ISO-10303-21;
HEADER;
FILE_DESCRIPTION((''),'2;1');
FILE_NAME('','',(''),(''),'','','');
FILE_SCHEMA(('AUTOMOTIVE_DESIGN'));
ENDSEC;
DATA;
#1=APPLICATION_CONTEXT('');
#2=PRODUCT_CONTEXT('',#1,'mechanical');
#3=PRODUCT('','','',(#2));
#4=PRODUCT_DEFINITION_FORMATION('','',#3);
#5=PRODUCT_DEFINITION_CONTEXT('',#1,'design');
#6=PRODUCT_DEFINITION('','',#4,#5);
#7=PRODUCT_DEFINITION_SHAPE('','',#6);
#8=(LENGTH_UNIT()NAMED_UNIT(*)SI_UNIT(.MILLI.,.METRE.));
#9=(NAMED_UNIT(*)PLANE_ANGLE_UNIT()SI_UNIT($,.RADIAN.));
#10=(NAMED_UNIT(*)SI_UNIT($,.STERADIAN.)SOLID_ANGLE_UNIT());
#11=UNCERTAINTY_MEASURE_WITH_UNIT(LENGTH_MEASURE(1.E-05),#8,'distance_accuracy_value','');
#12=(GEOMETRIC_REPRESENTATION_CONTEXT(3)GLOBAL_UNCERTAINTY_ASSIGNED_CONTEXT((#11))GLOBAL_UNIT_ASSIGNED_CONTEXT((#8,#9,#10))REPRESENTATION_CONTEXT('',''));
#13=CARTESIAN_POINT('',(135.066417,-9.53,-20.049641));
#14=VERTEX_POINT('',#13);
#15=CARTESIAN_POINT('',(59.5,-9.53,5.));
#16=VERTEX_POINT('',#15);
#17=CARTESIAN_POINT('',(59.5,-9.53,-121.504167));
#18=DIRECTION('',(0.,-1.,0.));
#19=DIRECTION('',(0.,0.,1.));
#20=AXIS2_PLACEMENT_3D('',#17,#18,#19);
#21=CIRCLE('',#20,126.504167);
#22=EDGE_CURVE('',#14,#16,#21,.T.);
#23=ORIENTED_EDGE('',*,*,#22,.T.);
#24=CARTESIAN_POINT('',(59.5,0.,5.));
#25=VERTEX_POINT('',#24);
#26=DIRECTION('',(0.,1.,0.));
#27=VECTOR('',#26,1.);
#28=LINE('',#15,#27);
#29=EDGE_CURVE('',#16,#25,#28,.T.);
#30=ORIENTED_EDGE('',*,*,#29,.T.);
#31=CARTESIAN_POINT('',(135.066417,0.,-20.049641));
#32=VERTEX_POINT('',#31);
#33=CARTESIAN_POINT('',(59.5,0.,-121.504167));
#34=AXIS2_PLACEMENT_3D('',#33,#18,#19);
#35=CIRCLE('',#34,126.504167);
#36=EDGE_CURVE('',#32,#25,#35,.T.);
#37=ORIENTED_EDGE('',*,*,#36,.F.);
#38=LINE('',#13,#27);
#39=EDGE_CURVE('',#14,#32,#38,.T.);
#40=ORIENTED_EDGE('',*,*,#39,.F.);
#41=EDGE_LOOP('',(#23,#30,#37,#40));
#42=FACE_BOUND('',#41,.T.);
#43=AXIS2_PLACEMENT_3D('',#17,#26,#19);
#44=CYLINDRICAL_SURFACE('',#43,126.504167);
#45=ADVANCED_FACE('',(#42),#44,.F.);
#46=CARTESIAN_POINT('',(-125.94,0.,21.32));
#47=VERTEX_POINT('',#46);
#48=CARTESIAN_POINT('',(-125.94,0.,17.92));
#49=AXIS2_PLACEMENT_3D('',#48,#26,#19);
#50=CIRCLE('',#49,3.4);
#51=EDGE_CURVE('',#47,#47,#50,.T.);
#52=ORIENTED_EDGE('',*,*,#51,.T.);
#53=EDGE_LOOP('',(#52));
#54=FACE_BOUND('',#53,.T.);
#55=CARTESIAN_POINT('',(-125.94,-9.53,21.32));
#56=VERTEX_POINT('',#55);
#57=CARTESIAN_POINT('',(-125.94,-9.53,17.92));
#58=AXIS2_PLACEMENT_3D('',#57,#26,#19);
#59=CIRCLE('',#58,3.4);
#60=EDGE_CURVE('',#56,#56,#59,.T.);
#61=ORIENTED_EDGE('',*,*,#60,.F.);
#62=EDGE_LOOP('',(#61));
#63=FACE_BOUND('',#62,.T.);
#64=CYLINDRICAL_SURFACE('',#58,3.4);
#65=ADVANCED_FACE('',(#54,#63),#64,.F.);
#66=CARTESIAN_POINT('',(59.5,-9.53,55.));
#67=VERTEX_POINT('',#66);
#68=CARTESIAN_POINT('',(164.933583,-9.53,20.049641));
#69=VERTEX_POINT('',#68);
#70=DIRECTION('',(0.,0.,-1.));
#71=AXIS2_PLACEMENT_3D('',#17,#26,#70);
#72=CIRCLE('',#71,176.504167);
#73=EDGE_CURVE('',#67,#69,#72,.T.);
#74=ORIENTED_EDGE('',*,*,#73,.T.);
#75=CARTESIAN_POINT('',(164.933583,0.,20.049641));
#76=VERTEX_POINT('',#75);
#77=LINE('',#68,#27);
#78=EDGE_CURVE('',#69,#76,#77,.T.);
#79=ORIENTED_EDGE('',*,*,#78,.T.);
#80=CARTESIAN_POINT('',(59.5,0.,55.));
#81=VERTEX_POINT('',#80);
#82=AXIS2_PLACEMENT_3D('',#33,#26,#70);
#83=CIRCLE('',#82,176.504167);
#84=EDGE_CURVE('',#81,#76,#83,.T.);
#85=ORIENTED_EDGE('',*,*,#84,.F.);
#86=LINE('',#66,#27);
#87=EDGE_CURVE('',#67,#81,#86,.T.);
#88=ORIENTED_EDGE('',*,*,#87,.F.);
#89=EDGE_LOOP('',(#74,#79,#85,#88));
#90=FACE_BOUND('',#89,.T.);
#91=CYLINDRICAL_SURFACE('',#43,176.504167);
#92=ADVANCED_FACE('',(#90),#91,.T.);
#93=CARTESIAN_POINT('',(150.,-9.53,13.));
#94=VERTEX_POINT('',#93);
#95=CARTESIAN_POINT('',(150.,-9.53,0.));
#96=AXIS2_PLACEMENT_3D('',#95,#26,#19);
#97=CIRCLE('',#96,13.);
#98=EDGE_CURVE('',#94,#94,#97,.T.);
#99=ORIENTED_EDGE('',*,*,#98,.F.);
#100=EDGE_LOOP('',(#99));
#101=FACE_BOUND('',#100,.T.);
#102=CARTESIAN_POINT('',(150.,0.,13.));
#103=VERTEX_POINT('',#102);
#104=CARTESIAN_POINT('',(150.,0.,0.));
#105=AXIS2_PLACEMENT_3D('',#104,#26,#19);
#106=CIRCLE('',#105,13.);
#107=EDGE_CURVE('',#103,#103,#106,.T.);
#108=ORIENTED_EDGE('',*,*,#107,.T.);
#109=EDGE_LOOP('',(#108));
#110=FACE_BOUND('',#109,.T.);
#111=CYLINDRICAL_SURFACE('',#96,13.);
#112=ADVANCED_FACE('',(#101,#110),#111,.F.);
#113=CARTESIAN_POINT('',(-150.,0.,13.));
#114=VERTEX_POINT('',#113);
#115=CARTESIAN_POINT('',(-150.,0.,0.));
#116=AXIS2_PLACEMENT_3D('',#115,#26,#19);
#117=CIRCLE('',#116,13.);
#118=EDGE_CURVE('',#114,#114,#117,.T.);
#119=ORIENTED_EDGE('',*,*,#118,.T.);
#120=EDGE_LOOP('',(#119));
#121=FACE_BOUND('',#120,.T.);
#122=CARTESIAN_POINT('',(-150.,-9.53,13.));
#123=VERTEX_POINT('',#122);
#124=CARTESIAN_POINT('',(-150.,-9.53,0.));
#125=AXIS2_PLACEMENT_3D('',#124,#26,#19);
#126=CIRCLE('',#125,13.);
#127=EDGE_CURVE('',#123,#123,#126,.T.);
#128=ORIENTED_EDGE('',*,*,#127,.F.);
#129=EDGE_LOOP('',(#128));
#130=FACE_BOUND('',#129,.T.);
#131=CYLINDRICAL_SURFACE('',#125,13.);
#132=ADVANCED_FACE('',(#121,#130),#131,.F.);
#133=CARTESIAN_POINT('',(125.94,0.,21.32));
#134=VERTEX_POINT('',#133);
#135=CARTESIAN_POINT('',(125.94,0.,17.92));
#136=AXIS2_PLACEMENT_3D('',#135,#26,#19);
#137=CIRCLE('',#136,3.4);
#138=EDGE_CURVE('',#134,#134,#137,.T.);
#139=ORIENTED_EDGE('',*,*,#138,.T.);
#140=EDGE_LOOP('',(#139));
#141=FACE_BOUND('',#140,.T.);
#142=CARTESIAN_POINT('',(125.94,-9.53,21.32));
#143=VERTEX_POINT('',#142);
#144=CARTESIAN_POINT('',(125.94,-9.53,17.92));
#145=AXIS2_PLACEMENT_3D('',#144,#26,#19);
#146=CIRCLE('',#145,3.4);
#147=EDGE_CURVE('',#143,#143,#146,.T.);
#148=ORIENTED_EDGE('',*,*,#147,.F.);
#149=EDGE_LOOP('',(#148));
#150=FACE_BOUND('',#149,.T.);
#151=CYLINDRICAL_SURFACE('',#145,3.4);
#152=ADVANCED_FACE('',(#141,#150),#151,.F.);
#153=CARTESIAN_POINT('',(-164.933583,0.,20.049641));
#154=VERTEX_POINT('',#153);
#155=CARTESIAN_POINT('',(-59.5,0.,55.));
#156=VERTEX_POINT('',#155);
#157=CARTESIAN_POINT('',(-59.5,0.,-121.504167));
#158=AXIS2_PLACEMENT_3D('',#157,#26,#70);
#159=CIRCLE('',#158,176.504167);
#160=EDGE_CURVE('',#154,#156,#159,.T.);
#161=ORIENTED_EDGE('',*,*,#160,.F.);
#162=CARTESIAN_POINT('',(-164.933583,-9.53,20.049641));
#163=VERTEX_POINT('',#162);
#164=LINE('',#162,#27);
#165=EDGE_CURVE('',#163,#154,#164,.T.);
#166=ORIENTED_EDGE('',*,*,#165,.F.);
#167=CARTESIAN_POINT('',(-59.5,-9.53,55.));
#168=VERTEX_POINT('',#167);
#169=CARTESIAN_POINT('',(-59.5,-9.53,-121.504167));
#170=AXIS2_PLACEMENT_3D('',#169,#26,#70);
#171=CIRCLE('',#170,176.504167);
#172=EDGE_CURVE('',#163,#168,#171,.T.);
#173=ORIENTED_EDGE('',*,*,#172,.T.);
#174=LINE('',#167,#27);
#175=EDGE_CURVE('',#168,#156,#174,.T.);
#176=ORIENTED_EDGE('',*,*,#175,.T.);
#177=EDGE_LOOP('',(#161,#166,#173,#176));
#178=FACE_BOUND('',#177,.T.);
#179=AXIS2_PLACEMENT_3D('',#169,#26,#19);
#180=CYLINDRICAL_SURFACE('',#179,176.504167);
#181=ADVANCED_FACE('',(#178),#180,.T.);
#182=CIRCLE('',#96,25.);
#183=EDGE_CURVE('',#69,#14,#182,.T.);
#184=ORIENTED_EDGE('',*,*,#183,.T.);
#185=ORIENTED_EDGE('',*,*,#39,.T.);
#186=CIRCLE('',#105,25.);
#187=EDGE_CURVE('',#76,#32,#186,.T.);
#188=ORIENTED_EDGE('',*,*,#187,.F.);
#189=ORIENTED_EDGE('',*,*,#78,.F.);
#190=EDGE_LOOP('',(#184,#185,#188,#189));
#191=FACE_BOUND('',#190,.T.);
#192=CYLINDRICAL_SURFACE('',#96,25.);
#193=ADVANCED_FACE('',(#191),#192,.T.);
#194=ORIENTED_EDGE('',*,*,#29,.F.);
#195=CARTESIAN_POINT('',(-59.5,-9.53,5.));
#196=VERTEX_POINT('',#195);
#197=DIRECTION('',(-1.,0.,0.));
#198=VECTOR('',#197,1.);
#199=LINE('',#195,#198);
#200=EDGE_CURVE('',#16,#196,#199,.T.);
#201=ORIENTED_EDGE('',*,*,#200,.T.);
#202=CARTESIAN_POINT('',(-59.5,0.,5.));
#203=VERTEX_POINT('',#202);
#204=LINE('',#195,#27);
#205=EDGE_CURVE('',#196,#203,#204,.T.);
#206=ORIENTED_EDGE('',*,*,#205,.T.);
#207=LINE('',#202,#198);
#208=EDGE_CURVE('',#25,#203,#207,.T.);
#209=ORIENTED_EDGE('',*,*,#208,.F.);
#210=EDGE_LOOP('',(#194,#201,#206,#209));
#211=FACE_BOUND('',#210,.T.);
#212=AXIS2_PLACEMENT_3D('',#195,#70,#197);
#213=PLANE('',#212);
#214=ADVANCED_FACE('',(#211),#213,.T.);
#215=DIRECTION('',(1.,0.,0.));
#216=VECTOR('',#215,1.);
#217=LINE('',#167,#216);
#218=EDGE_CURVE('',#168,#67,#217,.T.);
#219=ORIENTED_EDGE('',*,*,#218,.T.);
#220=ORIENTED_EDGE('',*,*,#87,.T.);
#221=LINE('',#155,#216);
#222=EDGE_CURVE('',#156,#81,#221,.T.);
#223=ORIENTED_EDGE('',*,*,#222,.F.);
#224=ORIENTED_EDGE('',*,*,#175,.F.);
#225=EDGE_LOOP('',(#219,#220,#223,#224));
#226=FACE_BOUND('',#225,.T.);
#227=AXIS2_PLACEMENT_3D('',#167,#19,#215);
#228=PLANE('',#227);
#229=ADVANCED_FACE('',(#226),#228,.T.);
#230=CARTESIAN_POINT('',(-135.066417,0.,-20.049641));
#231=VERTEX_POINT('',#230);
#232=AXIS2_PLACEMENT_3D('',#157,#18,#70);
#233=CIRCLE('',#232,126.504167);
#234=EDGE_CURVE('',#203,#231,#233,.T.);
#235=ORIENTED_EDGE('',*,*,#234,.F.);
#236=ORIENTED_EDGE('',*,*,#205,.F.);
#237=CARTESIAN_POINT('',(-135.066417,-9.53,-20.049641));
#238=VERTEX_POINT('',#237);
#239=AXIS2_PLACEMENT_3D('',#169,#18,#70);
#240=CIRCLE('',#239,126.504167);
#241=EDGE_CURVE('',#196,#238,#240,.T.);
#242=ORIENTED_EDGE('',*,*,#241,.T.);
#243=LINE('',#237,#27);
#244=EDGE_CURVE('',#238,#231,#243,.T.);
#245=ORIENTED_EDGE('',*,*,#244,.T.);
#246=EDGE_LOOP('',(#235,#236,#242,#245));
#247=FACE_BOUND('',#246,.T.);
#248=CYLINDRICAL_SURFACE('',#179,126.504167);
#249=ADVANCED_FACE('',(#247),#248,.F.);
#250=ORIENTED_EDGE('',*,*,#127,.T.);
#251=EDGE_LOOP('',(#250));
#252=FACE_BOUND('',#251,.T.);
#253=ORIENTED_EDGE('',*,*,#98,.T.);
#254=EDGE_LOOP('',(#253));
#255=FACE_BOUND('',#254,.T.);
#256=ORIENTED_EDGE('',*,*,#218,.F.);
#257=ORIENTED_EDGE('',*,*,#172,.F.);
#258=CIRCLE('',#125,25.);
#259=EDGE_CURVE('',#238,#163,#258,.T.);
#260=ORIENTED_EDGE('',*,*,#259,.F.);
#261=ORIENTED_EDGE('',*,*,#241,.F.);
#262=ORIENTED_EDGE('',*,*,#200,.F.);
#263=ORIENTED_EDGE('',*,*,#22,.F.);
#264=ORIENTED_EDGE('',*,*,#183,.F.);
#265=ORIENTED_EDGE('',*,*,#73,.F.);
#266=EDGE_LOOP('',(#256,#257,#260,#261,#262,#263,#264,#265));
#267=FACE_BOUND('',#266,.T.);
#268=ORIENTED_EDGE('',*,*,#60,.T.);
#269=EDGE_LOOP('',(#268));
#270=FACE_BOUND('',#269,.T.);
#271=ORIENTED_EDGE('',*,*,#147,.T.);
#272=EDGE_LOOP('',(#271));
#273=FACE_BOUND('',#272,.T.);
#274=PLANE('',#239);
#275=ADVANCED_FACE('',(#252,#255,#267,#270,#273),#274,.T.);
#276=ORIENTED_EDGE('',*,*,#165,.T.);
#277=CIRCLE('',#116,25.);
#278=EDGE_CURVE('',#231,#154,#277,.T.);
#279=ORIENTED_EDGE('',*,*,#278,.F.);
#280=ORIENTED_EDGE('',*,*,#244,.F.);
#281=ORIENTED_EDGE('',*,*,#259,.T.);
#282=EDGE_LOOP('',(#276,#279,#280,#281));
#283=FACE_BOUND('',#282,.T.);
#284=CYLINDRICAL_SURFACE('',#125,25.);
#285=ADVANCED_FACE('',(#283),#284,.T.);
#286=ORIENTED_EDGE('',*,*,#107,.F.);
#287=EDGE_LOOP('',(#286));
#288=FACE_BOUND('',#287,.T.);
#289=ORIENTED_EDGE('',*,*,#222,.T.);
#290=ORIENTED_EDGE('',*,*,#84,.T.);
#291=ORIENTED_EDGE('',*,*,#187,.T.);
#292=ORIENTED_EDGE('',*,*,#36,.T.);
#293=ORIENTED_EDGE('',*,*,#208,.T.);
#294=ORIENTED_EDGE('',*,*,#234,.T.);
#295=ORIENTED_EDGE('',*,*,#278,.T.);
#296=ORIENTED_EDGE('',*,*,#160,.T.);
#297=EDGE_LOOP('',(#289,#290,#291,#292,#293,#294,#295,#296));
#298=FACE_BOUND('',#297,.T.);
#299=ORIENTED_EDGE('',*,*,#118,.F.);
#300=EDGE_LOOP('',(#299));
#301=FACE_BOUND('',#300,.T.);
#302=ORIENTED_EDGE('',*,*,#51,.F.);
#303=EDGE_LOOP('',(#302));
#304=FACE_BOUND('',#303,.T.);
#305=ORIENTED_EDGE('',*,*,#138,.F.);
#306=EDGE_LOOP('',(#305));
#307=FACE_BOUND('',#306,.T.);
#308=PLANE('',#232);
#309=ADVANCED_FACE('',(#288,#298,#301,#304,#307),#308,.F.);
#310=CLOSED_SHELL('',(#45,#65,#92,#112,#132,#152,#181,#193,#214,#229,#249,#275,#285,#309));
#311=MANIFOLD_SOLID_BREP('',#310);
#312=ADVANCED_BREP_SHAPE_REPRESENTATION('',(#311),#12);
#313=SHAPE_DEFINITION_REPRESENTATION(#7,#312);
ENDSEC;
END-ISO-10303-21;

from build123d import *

# Parameters (mm, degrees)
ESBO_O1_R          = 13
ESBO_O1_R_2        = 3.4
FLANGE_BASE1_DEPTH = 9.53


# Sheet-metal steps are written as plain solids
with BuildPart() as part:
    # Esboço1 → Flange-base1 (new body)
    with BuildSketch(Plane(origin=(0, 0, 0), x_dir=(1, 0, 0), z_dir=(0, 1, 0))):
        with BuildLine():
            Line((-59.5, -5), (59.5, -5))
            ThreePointArc((59.5, -5), (99.305049758, 1.425599896), (135.066417315, 20.049641099))
            ThreePointArc((135.066417315, 20.049641099), (170.049641099, 14.933582685), (164.933582685, -20.049641099))
            ThreePointArc((164.933582685, -20.049641099), (115.037752802, -46.034720952), (59.5, -55))
            Line((59.5, -55), (-59.5, -55))
            ThreePointArc((-59.5, -55), (-115.037752802, -46.034720952), (-164.933582685, -20.049641099))
            ThreePointArc((-164.933582685, -20.049641099), (-170.049641099, 14.933582685), (-135.066417315, 20.049641099))
            ThreePointArc((-135.066417315, 20.049641099), (-99.305049758, 1.425599896), (-59.5, -5))
        make_face()
        with Locations(Location((-150, 0, 0), (0, 0, 270))):
            Circle(ESBO_O1_R, mode=Mode.SUBTRACT)
        with Locations(Location((150, 0, 0), (0, 0, 270))):
            Circle(ESBO_O1_R, mode=Mode.SUBTRACT)
        with Locations(Location((-125.94, -17.92, 0), (0, 0, 270))):
            Circle(ESBO_O1_R_2, mode=Mode.SUBTRACT)
        with Locations(Location((125.94, -17.92, 0), (0, 0, 270))):
            Circle(ESBO_O1_R_2, mode=Mode.SUBTRACT)
    extrude(amount=-FLANGE_BASE1_DEPTH)


solid = part.part
